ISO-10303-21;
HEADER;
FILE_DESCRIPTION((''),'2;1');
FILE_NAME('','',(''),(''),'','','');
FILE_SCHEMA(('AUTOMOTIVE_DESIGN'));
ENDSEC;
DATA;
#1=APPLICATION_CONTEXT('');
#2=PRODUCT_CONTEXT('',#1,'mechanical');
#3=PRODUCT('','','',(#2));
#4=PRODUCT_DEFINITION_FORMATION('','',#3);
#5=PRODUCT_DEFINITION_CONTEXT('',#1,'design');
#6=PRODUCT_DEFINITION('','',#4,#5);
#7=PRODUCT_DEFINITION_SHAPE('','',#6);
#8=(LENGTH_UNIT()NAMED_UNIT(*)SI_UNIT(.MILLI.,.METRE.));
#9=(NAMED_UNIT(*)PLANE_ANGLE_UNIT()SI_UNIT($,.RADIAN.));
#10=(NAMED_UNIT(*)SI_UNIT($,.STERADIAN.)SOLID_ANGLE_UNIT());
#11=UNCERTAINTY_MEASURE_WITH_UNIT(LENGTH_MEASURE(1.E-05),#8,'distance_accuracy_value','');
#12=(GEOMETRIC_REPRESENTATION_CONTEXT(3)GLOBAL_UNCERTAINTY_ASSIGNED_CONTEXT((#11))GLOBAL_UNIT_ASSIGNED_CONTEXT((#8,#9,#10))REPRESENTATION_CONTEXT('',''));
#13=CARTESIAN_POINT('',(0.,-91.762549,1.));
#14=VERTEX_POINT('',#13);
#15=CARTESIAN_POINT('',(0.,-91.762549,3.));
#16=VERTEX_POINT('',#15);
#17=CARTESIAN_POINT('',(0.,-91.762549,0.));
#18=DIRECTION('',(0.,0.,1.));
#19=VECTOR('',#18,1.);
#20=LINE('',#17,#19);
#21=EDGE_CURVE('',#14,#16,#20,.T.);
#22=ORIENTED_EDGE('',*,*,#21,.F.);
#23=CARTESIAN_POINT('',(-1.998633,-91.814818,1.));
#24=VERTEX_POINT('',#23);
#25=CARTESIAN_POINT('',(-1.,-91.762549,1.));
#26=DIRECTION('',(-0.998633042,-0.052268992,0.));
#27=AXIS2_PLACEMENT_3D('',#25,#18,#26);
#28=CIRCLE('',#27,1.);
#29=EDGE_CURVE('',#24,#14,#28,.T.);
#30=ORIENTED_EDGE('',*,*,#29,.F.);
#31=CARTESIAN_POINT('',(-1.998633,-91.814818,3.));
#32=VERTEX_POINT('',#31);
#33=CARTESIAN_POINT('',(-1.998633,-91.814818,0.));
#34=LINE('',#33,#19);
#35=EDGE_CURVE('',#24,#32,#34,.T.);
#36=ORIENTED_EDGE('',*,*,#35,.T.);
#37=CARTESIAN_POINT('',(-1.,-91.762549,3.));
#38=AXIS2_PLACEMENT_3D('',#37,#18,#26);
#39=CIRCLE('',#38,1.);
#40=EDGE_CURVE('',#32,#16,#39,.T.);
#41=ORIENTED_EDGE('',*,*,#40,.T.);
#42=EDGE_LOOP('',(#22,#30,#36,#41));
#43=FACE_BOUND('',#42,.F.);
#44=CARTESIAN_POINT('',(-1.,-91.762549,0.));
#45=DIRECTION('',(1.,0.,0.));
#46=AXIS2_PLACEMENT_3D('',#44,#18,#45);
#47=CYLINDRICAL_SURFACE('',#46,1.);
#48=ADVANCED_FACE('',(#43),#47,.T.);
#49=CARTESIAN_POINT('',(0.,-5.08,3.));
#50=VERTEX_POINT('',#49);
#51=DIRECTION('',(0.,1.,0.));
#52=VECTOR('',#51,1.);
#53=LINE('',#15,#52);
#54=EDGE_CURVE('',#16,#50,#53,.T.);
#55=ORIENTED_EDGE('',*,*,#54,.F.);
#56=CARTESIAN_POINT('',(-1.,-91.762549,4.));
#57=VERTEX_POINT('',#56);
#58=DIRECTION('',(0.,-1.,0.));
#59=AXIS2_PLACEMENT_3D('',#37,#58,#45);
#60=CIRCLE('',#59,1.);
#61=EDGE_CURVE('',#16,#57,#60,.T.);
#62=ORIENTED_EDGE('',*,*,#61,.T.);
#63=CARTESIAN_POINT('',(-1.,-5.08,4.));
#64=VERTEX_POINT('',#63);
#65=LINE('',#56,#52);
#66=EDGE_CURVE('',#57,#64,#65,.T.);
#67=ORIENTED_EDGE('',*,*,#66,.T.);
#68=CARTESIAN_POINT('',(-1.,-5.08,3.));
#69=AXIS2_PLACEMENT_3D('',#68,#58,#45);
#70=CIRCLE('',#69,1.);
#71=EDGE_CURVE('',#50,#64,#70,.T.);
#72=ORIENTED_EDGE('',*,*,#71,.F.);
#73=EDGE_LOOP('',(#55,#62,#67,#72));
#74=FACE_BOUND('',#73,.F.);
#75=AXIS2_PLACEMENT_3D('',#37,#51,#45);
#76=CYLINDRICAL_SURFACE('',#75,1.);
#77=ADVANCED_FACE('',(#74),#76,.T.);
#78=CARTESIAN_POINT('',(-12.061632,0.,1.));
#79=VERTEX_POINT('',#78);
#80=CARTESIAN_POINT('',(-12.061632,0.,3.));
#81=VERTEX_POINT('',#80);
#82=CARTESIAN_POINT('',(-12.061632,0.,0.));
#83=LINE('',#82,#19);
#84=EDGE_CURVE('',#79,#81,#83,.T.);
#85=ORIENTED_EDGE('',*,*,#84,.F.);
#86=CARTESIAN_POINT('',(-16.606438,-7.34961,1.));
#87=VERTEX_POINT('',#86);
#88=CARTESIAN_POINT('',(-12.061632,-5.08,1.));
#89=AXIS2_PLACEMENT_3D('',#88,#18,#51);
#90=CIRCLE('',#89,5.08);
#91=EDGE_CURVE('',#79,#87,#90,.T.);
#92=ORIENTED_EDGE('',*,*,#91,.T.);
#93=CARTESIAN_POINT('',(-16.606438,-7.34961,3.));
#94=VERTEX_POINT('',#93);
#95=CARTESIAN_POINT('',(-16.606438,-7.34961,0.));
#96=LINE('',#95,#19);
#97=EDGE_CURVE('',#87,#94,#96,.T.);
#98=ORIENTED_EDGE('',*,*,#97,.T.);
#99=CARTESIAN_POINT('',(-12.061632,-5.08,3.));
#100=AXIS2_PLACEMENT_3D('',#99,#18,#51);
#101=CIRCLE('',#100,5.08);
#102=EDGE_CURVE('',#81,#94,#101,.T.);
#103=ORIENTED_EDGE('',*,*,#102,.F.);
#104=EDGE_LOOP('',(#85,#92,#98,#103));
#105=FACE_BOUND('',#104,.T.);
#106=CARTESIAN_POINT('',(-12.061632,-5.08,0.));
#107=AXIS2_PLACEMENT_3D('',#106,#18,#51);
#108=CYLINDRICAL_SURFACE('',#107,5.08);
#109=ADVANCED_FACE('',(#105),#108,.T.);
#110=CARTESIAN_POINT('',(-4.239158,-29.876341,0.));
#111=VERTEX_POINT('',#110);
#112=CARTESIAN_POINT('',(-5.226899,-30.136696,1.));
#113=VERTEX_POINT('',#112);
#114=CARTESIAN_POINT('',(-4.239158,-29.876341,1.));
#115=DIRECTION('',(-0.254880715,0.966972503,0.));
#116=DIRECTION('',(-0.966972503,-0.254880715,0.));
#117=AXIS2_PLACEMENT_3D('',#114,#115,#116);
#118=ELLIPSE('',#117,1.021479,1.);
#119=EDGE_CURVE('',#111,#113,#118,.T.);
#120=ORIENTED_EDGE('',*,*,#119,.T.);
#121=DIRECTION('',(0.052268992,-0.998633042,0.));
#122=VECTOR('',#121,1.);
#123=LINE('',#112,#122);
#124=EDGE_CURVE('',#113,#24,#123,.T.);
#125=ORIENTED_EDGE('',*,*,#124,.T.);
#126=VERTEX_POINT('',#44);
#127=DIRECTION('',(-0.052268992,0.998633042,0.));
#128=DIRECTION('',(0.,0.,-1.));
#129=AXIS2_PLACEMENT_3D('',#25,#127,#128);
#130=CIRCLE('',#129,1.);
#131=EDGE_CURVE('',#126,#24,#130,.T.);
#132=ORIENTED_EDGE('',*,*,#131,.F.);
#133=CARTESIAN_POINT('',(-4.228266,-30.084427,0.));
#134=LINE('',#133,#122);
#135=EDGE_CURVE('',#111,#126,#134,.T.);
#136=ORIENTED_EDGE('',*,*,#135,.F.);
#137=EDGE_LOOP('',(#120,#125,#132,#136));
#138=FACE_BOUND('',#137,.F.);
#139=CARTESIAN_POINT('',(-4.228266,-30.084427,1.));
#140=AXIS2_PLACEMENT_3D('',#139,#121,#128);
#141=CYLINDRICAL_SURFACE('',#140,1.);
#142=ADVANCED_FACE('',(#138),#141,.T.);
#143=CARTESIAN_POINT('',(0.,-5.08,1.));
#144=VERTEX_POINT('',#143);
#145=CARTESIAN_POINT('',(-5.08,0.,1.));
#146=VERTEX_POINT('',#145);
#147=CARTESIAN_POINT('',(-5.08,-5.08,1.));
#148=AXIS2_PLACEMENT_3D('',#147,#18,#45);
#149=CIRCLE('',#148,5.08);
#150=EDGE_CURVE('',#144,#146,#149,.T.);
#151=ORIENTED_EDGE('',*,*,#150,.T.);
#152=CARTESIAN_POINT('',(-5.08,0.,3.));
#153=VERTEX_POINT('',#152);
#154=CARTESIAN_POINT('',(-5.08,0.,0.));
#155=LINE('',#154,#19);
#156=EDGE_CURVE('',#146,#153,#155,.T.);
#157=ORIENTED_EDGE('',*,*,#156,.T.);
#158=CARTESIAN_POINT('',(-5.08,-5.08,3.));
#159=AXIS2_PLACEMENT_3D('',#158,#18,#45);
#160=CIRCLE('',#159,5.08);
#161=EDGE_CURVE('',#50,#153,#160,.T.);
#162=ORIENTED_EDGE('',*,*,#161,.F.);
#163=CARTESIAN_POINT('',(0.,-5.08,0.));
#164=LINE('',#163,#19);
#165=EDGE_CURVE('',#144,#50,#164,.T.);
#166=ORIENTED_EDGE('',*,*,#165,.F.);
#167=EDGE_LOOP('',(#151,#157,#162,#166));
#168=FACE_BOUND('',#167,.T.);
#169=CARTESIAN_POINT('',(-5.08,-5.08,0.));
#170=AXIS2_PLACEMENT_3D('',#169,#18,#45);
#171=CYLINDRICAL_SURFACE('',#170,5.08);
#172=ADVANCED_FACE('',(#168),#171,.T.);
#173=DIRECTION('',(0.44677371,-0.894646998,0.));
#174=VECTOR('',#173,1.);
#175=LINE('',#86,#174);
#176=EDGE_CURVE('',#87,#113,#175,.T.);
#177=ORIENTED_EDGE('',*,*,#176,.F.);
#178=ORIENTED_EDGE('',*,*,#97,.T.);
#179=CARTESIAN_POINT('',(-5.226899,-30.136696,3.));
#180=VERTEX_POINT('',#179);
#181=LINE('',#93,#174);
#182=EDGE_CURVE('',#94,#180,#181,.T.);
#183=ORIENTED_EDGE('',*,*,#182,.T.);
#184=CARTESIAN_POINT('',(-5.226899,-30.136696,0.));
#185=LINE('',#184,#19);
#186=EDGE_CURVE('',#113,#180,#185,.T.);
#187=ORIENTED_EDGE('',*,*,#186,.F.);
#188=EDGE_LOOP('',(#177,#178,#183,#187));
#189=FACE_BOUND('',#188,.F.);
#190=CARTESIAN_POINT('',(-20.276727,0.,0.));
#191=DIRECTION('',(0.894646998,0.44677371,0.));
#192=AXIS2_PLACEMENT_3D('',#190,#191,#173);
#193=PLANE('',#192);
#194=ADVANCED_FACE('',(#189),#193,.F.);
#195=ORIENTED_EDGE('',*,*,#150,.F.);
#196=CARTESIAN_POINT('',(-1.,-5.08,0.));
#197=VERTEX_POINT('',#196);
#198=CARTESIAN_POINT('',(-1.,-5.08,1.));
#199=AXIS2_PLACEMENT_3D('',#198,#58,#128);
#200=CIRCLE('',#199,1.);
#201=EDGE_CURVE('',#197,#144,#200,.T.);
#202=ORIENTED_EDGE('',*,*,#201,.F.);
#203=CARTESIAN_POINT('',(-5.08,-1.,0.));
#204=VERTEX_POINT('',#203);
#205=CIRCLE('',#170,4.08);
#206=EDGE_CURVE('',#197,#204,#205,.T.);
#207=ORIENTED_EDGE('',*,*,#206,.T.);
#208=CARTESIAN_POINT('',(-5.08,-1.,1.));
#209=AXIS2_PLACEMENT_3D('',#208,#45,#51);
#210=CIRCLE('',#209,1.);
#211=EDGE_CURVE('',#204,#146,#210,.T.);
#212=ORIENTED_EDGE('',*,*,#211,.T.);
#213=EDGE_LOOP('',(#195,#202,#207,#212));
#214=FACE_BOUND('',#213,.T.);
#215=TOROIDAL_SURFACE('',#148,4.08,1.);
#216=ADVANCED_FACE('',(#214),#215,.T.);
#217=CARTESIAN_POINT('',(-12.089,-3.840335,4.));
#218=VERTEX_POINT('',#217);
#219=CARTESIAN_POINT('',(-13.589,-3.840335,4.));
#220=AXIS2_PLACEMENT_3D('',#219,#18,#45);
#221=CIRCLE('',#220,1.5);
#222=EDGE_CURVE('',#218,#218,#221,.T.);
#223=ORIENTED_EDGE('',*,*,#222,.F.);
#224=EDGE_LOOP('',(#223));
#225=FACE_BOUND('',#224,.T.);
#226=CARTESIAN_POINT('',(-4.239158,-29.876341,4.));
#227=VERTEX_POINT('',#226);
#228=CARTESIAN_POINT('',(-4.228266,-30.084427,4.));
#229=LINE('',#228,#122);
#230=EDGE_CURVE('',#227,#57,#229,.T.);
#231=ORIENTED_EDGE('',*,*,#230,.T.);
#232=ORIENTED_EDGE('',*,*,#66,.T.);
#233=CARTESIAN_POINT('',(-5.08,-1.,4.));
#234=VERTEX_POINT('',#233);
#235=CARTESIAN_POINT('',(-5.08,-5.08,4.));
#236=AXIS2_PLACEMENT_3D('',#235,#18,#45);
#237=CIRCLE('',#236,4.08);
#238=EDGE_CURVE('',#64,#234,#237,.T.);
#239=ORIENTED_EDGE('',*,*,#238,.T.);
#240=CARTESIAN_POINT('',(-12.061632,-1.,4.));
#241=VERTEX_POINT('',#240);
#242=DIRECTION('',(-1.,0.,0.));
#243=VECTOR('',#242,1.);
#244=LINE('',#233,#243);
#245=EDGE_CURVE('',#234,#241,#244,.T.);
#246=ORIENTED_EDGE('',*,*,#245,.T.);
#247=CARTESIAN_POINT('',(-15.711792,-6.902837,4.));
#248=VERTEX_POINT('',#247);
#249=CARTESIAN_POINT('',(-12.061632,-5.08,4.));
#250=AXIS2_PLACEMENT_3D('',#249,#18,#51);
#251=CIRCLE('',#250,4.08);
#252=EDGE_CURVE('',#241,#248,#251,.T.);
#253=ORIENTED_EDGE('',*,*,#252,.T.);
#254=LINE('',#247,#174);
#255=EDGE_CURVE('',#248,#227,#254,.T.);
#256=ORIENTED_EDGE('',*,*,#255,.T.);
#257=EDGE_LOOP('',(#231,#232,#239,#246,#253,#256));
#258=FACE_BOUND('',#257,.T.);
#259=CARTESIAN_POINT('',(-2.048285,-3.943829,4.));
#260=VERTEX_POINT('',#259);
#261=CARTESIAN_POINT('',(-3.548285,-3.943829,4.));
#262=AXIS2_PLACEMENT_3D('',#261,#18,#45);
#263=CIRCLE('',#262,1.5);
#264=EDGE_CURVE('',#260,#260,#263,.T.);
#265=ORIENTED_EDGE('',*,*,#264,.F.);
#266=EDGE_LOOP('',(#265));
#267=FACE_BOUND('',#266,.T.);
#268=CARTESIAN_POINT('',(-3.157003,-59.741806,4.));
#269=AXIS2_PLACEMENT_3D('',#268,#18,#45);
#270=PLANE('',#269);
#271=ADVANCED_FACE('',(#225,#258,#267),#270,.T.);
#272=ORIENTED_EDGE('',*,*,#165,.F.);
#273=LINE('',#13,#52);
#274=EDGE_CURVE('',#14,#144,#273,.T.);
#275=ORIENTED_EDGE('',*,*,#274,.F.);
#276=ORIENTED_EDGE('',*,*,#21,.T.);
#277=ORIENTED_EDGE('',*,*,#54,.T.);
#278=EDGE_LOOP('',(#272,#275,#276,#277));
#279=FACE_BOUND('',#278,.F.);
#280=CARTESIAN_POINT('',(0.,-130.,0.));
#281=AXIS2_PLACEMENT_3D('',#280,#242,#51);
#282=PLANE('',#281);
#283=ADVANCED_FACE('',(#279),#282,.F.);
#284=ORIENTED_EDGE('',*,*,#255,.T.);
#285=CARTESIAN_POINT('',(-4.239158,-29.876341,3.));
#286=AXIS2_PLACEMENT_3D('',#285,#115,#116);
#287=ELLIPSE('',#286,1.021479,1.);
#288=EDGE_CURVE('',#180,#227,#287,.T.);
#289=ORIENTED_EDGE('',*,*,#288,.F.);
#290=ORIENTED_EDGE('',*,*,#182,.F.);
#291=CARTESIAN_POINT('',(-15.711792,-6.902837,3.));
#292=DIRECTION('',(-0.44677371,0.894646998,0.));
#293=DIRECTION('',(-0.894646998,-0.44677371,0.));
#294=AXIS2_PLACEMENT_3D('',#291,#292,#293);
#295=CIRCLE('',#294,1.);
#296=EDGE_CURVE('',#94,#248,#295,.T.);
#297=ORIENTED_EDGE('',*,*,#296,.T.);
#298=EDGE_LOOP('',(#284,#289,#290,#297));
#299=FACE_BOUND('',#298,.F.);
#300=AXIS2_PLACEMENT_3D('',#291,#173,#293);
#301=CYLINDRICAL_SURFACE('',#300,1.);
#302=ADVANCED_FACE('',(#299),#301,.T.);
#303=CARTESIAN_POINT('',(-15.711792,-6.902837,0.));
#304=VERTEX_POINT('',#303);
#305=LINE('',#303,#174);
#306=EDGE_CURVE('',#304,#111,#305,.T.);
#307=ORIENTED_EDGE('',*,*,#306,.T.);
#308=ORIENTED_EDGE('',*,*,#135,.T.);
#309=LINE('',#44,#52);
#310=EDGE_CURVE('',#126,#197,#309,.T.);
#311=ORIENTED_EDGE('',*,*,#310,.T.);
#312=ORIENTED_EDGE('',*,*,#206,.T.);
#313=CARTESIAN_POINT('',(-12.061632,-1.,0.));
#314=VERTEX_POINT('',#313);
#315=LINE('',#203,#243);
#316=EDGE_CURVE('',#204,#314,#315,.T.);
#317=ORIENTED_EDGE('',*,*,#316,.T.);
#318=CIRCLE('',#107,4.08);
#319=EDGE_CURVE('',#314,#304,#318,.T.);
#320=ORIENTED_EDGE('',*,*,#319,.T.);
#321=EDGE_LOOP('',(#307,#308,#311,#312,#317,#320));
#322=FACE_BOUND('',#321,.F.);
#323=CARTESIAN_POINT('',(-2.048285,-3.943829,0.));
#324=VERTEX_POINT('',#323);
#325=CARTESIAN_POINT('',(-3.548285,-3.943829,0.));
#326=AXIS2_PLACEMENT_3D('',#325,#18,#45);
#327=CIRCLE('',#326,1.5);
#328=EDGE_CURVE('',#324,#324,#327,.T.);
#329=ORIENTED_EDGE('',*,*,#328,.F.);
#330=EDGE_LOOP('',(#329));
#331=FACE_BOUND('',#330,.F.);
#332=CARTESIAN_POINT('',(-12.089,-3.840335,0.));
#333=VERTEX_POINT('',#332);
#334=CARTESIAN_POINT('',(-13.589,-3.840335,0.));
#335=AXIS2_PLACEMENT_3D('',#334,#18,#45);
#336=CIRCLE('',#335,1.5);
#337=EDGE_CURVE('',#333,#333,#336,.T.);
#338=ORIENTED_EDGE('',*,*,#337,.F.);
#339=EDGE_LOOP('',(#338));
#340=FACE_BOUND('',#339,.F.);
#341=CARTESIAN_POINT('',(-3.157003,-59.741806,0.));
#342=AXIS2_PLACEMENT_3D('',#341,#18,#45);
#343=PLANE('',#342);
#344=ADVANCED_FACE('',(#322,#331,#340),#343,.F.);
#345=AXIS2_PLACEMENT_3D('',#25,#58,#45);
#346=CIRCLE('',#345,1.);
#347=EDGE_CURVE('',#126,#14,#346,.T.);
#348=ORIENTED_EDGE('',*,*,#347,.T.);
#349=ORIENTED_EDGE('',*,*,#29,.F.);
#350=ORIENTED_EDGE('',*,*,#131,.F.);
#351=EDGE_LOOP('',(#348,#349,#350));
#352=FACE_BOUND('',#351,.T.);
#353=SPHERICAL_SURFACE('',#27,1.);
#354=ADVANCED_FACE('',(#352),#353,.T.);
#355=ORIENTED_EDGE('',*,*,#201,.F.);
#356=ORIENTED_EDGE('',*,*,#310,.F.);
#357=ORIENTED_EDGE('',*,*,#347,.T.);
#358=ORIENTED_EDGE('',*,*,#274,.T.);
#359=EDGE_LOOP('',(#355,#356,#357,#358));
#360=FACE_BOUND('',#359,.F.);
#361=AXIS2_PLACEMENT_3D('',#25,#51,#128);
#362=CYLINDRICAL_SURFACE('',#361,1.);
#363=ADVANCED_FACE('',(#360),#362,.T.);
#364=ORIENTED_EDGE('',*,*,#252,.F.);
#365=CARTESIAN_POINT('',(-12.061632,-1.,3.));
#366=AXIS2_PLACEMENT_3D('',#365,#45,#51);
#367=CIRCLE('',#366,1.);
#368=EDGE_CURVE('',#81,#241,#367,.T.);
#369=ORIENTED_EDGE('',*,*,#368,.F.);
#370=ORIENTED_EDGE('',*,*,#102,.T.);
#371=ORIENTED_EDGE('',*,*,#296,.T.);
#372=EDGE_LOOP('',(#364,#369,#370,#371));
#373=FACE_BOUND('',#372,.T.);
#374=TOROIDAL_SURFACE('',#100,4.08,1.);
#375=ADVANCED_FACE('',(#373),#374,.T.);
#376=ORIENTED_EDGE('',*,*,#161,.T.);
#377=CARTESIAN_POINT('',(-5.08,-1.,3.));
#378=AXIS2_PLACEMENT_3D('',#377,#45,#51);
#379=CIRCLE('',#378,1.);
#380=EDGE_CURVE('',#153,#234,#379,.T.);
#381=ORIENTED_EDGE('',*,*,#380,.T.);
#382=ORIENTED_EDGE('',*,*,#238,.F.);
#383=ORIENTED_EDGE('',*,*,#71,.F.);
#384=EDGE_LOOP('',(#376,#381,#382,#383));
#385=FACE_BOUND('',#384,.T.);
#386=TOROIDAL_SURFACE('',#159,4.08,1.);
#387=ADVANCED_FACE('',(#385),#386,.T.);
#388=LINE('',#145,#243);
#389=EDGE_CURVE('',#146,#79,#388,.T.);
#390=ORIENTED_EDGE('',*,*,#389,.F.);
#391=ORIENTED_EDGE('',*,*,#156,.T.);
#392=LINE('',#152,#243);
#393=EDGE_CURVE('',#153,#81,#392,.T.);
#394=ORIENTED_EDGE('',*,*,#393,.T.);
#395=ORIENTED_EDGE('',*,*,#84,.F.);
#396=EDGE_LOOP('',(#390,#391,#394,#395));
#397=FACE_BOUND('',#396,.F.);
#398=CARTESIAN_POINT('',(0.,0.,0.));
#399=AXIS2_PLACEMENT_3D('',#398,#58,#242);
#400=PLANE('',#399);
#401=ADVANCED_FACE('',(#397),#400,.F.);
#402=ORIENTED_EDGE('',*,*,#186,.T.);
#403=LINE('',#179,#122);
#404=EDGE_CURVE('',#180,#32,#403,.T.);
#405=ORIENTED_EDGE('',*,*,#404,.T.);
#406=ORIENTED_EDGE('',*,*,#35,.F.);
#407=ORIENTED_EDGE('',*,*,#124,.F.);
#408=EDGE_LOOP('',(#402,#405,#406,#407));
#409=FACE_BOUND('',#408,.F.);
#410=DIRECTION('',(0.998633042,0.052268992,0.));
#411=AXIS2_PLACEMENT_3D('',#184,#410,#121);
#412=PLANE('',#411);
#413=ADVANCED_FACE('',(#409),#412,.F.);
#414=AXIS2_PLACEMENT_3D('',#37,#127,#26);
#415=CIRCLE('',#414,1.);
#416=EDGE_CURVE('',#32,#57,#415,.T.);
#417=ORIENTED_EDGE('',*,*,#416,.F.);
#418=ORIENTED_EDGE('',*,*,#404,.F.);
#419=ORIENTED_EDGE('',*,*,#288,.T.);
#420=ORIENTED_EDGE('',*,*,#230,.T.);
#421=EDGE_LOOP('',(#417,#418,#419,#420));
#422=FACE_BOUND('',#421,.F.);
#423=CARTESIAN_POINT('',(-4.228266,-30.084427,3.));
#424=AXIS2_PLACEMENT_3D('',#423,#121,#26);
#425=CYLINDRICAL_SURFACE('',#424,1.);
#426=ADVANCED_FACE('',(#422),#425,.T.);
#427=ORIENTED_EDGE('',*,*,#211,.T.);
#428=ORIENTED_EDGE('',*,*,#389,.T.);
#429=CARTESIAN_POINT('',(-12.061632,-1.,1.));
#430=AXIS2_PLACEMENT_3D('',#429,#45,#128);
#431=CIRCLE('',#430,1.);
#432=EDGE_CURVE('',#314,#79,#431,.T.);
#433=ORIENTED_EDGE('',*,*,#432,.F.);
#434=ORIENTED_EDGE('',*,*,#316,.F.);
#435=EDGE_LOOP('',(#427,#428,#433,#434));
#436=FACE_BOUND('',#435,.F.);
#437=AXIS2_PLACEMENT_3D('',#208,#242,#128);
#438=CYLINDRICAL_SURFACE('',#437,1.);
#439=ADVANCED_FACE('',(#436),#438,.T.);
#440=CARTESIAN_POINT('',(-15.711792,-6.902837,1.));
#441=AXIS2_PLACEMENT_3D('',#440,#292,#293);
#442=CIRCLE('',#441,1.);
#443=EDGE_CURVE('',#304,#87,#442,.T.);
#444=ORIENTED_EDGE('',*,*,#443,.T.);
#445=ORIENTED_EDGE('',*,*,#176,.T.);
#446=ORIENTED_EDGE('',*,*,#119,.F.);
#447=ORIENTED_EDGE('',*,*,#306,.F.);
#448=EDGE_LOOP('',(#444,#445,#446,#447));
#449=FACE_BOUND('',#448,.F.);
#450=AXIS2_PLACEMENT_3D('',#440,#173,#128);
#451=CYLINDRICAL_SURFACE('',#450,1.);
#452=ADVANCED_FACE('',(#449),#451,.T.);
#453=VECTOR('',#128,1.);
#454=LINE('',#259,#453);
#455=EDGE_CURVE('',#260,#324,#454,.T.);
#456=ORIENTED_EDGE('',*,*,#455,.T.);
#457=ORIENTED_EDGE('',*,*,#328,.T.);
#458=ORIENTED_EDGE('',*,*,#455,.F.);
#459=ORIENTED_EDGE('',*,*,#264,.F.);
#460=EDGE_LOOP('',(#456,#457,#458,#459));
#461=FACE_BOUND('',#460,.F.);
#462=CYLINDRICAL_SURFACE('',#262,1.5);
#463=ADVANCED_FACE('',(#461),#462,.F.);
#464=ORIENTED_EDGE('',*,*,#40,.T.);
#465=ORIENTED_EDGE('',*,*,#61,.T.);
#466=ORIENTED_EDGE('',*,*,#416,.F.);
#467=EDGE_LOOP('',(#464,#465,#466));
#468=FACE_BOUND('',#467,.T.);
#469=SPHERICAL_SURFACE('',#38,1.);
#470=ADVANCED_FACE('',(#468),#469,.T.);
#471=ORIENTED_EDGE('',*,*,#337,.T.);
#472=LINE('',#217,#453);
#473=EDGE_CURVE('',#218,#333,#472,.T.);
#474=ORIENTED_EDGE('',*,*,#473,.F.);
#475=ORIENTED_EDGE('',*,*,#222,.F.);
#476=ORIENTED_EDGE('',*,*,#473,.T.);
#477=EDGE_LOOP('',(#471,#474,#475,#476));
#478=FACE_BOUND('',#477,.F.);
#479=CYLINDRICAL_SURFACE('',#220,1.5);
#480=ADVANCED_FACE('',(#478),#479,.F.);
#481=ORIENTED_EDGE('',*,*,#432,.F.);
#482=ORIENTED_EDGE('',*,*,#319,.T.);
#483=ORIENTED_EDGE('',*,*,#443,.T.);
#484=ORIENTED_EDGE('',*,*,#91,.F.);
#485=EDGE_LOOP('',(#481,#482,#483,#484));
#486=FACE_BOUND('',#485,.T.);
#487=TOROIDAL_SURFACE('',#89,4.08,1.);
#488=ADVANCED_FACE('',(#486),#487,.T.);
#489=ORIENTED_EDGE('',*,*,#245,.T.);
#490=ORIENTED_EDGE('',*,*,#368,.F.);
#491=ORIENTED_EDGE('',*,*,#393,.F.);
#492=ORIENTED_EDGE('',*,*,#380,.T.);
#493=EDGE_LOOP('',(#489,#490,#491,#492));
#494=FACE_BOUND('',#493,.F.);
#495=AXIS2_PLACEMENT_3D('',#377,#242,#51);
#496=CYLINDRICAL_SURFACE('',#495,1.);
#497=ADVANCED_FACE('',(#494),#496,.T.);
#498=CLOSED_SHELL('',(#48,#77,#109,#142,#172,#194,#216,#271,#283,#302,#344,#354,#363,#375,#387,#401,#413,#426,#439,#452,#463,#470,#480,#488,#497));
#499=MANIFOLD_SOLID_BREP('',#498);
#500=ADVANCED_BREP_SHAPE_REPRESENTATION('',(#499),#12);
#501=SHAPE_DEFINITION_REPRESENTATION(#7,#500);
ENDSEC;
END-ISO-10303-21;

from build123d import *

# Parameters (mm, degrees)
F1_DEPTH = 4
F2_R     = 5.08
F3_R     = 5.08
F4_R     = 1
F5_R     = 1
F6_R     = 1.5
F7_DEPTH = 25.4
F8_R     = 1


# Not quite as in the source:
# - a feature names something its author has since deleted; it is built from what else it names


with BuildPart() as f1:
    # F0 (on Top) → F1 (new body)
    with BuildSketch(Plane.XY):
        Polygon((0, -130), (0, 0), (-20.2767271549, 0), (-5.2268992042, -30.1366958052), align=None)
    extrude(amount=F1_DEPTH)

    # F2
    f2_edges = [f1.edges().sort_by_distance(p)[0] for p in [
        (0, 0, 2),
    ]]
    fillet(f2_edges, radius=F2_R)

    # F3
    f3_edges = [f1.edges().sort_by_distance(p)[0] for p in [
        (-20.276727, 0, 2),
    ]]
    fillet(f3_edges, radius=F3_R)

    # F4
    f4_edges = [f1.edges().sort_by_distance(p)[0] for p in [
        (0, -130, 2),
    ]]
    fillet(f4_edges, radius=F4_R)

    # F5
    f5_edges = [f1.edges().sort_by_distance(p)[0] for p in [
        (-10.916669, -18.743153, 4),
        (-3.612766, -60.975757, 4),
    ]]
    fillet(f5_edges, radius=F5_R)

    # F6 (on face) → F7 (cut)
    with BuildSketch(Plane.XY.offset(4)):
        with Locations((-13.589, -3.840335412)):
            Circle(F6_R)
        with Locations((-3.5482854582, -3.9438293315)):
            Circle(F6_R)
    extrude(amount=-F7_DEPTH, mode=Mode.SUBTRACT)

    # F8
    f8_edges = [f1.edges().sort_by_distance(p)[0] for p in [
        (-8.570816, 0, 0),
        (-10.916669, -18.743153, 0),
    ]]
    fillet(f8_edges, radius=F8_R)


solid = f1.part
